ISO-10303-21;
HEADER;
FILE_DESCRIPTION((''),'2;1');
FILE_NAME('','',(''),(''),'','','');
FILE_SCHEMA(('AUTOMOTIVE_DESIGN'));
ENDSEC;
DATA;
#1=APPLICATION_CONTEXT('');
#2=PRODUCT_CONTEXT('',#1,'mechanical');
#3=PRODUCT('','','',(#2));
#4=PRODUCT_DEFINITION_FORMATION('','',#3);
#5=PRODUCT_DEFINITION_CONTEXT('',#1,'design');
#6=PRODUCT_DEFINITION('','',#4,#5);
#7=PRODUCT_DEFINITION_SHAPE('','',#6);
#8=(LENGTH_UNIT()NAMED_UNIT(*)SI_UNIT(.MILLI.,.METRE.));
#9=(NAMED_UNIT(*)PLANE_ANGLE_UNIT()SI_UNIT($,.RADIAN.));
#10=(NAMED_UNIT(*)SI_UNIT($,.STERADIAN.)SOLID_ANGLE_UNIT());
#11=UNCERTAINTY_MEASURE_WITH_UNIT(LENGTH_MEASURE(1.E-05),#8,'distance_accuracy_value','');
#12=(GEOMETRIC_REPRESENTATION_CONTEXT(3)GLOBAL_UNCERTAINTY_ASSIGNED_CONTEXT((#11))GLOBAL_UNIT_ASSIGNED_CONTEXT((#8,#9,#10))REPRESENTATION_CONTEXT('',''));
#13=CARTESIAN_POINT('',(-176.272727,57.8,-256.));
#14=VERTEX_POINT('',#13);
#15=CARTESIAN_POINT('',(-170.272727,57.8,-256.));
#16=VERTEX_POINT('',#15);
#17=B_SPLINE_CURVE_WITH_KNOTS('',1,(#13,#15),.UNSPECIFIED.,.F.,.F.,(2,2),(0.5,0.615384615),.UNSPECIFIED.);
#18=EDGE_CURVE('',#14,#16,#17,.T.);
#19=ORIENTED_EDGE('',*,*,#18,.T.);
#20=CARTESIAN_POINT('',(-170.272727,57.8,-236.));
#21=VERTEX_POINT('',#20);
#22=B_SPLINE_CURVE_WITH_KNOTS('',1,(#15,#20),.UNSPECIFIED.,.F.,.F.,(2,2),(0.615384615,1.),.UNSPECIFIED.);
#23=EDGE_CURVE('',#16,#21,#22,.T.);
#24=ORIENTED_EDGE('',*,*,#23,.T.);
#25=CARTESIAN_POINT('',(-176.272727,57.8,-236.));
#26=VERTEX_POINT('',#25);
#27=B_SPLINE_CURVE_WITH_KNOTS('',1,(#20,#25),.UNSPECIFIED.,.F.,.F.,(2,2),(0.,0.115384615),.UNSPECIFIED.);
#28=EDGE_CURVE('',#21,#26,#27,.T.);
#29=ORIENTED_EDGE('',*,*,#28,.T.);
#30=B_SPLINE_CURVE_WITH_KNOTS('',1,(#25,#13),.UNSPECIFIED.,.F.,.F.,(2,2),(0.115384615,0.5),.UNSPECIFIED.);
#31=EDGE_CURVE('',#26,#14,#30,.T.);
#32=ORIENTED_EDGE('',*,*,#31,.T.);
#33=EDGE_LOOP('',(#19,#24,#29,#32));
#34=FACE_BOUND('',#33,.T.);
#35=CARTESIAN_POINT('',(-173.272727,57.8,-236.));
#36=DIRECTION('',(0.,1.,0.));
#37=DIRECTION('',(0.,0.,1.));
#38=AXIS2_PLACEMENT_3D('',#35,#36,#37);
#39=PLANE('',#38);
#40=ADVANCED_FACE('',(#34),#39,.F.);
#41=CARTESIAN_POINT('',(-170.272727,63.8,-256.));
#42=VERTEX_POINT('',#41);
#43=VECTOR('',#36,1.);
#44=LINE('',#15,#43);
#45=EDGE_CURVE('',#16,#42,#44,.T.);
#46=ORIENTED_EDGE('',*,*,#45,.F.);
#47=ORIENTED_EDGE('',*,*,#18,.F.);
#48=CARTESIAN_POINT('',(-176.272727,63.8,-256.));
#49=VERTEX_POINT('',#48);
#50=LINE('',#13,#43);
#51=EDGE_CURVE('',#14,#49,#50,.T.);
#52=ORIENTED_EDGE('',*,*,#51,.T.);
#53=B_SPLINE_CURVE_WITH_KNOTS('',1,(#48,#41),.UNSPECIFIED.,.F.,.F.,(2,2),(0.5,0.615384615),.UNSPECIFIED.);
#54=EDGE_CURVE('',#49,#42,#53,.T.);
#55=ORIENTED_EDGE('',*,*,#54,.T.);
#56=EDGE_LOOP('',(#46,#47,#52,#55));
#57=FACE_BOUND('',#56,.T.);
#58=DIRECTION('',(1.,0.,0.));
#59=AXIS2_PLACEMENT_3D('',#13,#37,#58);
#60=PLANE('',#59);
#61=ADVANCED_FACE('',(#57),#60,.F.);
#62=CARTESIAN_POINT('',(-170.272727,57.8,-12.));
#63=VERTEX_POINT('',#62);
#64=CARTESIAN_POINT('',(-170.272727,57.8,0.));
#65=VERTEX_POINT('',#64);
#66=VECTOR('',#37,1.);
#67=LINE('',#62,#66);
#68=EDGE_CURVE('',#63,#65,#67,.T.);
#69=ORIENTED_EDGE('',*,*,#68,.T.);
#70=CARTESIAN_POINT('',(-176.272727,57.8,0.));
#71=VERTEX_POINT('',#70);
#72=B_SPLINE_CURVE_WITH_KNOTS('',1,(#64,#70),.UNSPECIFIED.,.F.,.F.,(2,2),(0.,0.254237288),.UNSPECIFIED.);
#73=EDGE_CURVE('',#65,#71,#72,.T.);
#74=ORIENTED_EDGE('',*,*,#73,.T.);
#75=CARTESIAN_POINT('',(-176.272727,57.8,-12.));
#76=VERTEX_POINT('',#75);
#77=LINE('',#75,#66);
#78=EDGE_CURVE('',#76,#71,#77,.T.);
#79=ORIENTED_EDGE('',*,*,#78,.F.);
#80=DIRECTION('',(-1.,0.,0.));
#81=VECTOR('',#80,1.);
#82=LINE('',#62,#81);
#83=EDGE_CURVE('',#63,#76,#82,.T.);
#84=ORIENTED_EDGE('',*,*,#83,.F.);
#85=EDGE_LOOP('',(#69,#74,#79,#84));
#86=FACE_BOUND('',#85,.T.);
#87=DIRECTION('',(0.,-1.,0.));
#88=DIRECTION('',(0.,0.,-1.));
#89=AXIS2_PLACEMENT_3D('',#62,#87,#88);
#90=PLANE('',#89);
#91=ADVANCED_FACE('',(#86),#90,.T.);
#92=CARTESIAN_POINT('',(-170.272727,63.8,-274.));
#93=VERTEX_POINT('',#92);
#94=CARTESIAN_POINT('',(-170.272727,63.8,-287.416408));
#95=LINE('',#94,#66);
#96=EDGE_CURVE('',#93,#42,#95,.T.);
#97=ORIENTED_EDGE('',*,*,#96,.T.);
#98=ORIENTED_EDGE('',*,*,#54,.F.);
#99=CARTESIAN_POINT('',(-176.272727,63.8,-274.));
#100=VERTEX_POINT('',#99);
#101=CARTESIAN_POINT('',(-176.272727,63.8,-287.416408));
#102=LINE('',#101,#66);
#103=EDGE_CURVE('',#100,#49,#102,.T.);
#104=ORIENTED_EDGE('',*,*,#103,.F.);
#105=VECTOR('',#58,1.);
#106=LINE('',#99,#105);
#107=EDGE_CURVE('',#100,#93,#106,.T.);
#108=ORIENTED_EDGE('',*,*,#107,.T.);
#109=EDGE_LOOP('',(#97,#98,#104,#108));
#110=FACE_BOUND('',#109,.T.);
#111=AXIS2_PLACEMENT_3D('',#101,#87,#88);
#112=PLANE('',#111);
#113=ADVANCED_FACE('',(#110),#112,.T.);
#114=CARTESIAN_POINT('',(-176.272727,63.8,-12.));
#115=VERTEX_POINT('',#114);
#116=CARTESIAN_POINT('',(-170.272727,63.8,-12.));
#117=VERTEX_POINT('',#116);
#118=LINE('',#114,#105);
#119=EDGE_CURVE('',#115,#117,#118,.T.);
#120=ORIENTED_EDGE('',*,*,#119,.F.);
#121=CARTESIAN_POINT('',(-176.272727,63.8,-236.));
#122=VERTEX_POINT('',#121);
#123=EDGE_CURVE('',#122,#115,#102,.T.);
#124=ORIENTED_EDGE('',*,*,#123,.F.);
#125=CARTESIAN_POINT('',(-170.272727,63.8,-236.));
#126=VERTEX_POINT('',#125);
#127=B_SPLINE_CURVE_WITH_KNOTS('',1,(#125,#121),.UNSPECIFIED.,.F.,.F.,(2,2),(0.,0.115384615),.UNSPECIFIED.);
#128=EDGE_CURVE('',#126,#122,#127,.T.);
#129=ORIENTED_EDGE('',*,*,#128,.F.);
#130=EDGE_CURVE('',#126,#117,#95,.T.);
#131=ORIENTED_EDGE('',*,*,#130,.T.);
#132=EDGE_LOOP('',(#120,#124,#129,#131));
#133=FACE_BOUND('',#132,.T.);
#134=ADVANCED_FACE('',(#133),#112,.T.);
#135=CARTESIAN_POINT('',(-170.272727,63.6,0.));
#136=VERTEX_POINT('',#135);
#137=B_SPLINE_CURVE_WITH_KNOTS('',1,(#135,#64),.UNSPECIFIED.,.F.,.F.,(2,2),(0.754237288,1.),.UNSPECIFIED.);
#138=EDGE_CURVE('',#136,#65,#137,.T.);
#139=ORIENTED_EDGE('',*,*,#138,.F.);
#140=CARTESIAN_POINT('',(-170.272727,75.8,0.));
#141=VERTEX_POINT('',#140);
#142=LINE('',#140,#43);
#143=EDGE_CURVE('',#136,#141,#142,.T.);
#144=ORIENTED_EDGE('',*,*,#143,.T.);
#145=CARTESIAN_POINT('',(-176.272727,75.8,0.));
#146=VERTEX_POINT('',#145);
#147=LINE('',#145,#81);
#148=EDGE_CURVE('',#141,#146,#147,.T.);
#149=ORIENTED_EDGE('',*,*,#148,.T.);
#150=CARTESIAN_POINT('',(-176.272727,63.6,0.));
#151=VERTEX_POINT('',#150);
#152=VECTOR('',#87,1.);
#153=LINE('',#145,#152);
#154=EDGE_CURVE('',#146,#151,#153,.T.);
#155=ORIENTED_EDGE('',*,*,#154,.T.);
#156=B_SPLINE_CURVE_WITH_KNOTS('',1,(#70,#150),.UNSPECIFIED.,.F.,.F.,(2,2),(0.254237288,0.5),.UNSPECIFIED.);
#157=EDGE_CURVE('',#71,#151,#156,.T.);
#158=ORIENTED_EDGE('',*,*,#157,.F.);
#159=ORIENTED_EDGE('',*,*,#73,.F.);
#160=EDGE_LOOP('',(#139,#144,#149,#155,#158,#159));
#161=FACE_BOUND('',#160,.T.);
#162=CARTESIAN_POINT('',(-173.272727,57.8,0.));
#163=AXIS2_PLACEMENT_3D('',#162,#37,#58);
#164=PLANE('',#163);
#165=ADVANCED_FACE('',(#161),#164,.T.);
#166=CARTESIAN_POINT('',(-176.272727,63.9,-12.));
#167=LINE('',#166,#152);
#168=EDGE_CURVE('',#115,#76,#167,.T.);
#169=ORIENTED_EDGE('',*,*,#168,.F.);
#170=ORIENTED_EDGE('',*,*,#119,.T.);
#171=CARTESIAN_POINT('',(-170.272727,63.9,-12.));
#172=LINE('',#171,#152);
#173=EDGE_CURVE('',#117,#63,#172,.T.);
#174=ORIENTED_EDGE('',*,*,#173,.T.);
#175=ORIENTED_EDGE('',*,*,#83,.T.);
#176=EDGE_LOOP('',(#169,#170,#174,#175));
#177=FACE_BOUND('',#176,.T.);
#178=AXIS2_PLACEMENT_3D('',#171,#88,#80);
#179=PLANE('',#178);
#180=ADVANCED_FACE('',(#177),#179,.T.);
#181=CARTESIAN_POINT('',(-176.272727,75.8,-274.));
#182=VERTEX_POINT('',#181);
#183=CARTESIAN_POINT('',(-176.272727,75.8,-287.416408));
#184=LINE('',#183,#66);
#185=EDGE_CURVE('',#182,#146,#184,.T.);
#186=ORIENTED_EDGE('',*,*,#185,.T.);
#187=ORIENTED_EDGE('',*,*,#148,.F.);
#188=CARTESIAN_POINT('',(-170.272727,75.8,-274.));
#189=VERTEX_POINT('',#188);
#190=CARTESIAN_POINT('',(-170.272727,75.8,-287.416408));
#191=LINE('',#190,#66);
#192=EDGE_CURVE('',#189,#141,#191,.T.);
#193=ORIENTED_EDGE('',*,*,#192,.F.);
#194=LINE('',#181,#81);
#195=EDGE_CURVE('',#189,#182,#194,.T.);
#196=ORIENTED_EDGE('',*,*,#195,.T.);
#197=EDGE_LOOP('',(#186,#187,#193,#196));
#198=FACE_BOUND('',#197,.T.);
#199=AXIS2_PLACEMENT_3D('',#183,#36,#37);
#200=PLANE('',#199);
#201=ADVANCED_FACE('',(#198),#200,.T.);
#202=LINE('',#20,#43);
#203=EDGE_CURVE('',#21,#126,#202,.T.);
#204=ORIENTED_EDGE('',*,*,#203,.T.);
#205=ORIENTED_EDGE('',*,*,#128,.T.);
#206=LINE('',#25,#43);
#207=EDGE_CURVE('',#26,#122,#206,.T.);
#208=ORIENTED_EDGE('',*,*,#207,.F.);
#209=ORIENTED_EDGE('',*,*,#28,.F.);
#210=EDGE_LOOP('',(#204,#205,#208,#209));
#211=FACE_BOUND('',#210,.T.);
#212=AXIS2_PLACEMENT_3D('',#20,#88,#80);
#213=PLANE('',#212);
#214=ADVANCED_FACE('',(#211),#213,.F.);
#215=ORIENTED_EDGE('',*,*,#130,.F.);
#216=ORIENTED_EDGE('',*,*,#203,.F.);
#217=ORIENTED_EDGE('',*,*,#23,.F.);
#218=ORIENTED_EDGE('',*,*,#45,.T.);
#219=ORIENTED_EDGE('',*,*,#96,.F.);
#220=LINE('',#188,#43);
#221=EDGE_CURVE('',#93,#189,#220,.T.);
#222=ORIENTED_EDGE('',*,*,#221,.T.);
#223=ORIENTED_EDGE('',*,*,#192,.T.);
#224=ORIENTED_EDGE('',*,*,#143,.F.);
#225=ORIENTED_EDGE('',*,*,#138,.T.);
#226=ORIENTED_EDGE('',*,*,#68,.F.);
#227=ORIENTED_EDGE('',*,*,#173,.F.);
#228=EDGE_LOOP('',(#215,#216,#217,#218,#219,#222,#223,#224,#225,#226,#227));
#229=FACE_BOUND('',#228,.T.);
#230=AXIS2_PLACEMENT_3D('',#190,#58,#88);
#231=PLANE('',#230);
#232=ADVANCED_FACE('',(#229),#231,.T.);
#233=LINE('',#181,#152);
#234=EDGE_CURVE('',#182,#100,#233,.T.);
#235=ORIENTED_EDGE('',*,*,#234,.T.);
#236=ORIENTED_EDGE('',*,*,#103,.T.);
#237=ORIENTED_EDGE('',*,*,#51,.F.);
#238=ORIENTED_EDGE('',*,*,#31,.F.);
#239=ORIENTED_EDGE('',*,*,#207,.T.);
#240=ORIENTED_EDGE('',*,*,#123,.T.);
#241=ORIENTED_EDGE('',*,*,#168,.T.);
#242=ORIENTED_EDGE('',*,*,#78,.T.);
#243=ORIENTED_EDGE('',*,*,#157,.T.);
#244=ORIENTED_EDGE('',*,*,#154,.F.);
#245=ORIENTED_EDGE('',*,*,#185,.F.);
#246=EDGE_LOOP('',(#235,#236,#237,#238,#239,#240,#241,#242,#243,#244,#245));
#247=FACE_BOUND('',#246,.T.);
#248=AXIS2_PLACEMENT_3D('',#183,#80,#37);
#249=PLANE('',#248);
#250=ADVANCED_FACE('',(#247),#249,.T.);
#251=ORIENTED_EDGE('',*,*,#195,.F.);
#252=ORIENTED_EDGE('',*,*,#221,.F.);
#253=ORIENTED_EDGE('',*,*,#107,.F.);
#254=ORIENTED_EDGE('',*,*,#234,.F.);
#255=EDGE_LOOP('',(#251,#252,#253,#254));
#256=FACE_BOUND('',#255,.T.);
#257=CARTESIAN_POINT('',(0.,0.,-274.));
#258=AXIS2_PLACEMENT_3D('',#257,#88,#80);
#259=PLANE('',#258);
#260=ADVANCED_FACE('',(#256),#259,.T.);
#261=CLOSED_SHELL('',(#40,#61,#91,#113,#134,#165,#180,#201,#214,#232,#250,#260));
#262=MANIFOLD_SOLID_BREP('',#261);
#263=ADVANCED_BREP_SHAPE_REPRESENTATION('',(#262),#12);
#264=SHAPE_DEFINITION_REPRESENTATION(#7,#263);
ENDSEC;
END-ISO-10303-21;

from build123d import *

# Parameters (mm, degrees)
EXTRUDE_START            = -274
SKETCH_1_W               = 6
SKETCH_1_H               = 12
EXTRUDE_1_DEPTH          = 268
CUT_EXTRUDE_2_DEPTH      = 335.505178406
CUT_EXTRUDE_2_DEPTH_BACK = 335.505178406
SKETCH_3106_W            = 6
SKETCH_3106_H            = 6.1
EXTRUDE_3215_DEPTH       = 6
OTHER_START              = 57.8
OTHER_3265_OUTLINE_W     = 6
OTHER_3265_OUTLINE_H     = 6
OTHER_3265_DEPTH         = 5.8
SKETCH_3419_W            = 24
SKETCH_3419_H            = 12
EXTRUDE_3519_DEPTH       = 6
OTHER_START_2            = -176.272727273
OTHER_3590_OUTLINE_W     = 6
OTHER_3590_OUTLINE_H     = 20
OTHER_3590_DEPTH         = 6
SKETCH_2_W               = 6
SKETCH_2_H               = 12.2
EXTRUDE_2_DEPTH          = 6


# Read off the part's stored shape, not the designer's step: the other step, the other step
with BuildPart() as part:
    # Sketch 1 → Extrude 1 (new body)
    with BuildSketch(Plane.XY.offset(EXTRUDE_START)):
        with Locations((-173.272727273, 69.8)):
            Rectangle(SKETCH_1_W, SKETCH_1_H)
    extrude(amount=EXTRUDE_1_DEPTH)

    # Sketch 3011 → Cut-Extrude 2 (cut, two sides: drawn at the far end of the back side and taken through both)
    with BuildSketch(Plane(origin=(0, 0, 0), x_dir=(0, 0, -1), z_dir=(1, 0, 0)).offset(-CUT_EXTRUDE_2_DEPTH_BACK)):
        Polygon((140.075, 62.8), (139.925, 62.8), (139.925, 66.725), (127.925, 66.725), (127.925, 72.875), (139.925, 72.875), (139.925, 76.8), (140.075, 76.8), (140.075, 72.725), (128.075, 72.725), (128.075, 66.875), (140.075, 66.875), align=None)
    extrude(amount=CUT_EXTRUDE_2_DEPTH + CUT_EXTRUDE_2_DEPTH_BACK, mode=Mode.SUBTRACT)


with BuildPart() as cut_extrude_2_piece_1:
    # of the separate pieces the step leaves, piece 1, a body of its own (cut_extrude_2_pieces)
    add(part.part.solids().sort_by_distance((-176.272727273, 75.8, -274))[0])



with BuildPart() as cut_extrude_2_piece_2:
    # of the separate pieces the step leaves, piece 2, a body of its own (cut_extrude_2_pieces)
    add(part.part.solids().sort_by_distance((-176.272727273, 75.8, -139.925))[0])

    # Sketch 3106 → Extrude 3215 (add)
    with BuildSketch(Plane.ZY.offset(176.272727273)):
        with Locations((-9, 60.85)):
            Rectangle(SKETCH_3106_W, SKETCH_3106_H)
    extrude(amount=-EXTRUDE_3215_DEPTH)

    # Other 3265 outline → Other 3265 (add)
    with BuildSketch(Plane(origin=(0, 0, 0), x_dir=(1, 0, 0), z_dir=(0, 1, 0)).offset(OTHER_START)):
        with Locations((-173.272727273, 3)):
            Rectangle(OTHER_3265_OUTLINE_W, OTHER_3265_OUTLINE_H)
    extrude(amount=OTHER_3265_DEPTH)


with BuildPart() as cut_extrude_2_piece_1_1:
    add(cut_extrude_2_piece_1.part)

    add(cut_extrude_2_piece_2.part)  # Extrude 3519 merges Cut-Extrude 2 piece 2
    # Sketch 3419 → Extrude 3519 (add)
    with BuildSketch(Plane.ZY.offset(176.272727273)):
        with Locations((-134, 69.8)):
            Rectangle(SKETCH_3419_W, SKETCH_3419_H)
    extrude(amount=-EXTRUDE_3519_DEPTH)

    # Other 3590 outline → Other 3590 (add)
    with BuildSketch(Plane.YZ.offset(OTHER_START_2)):
        with Locations((60.8, -246)):
            Rectangle(OTHER_3590_OUTLINE_W, OTHER_3590_OUTLINE_H)
    extrude(amount=OTHER_3590_DEPTH)

    # Sketch 2 → Extrude 2 (add)
    with BuildSketch(Plane.XY.offset(-6)):
        with Locations((-173.272727273, 69.7)):
            Rectangle(SKETCH_2_W, SKETCH_2_H)
    extrude(amount=EXTRUDE_2_DEPTH)


solid = cut_extrude_2_piece_1_1.part
